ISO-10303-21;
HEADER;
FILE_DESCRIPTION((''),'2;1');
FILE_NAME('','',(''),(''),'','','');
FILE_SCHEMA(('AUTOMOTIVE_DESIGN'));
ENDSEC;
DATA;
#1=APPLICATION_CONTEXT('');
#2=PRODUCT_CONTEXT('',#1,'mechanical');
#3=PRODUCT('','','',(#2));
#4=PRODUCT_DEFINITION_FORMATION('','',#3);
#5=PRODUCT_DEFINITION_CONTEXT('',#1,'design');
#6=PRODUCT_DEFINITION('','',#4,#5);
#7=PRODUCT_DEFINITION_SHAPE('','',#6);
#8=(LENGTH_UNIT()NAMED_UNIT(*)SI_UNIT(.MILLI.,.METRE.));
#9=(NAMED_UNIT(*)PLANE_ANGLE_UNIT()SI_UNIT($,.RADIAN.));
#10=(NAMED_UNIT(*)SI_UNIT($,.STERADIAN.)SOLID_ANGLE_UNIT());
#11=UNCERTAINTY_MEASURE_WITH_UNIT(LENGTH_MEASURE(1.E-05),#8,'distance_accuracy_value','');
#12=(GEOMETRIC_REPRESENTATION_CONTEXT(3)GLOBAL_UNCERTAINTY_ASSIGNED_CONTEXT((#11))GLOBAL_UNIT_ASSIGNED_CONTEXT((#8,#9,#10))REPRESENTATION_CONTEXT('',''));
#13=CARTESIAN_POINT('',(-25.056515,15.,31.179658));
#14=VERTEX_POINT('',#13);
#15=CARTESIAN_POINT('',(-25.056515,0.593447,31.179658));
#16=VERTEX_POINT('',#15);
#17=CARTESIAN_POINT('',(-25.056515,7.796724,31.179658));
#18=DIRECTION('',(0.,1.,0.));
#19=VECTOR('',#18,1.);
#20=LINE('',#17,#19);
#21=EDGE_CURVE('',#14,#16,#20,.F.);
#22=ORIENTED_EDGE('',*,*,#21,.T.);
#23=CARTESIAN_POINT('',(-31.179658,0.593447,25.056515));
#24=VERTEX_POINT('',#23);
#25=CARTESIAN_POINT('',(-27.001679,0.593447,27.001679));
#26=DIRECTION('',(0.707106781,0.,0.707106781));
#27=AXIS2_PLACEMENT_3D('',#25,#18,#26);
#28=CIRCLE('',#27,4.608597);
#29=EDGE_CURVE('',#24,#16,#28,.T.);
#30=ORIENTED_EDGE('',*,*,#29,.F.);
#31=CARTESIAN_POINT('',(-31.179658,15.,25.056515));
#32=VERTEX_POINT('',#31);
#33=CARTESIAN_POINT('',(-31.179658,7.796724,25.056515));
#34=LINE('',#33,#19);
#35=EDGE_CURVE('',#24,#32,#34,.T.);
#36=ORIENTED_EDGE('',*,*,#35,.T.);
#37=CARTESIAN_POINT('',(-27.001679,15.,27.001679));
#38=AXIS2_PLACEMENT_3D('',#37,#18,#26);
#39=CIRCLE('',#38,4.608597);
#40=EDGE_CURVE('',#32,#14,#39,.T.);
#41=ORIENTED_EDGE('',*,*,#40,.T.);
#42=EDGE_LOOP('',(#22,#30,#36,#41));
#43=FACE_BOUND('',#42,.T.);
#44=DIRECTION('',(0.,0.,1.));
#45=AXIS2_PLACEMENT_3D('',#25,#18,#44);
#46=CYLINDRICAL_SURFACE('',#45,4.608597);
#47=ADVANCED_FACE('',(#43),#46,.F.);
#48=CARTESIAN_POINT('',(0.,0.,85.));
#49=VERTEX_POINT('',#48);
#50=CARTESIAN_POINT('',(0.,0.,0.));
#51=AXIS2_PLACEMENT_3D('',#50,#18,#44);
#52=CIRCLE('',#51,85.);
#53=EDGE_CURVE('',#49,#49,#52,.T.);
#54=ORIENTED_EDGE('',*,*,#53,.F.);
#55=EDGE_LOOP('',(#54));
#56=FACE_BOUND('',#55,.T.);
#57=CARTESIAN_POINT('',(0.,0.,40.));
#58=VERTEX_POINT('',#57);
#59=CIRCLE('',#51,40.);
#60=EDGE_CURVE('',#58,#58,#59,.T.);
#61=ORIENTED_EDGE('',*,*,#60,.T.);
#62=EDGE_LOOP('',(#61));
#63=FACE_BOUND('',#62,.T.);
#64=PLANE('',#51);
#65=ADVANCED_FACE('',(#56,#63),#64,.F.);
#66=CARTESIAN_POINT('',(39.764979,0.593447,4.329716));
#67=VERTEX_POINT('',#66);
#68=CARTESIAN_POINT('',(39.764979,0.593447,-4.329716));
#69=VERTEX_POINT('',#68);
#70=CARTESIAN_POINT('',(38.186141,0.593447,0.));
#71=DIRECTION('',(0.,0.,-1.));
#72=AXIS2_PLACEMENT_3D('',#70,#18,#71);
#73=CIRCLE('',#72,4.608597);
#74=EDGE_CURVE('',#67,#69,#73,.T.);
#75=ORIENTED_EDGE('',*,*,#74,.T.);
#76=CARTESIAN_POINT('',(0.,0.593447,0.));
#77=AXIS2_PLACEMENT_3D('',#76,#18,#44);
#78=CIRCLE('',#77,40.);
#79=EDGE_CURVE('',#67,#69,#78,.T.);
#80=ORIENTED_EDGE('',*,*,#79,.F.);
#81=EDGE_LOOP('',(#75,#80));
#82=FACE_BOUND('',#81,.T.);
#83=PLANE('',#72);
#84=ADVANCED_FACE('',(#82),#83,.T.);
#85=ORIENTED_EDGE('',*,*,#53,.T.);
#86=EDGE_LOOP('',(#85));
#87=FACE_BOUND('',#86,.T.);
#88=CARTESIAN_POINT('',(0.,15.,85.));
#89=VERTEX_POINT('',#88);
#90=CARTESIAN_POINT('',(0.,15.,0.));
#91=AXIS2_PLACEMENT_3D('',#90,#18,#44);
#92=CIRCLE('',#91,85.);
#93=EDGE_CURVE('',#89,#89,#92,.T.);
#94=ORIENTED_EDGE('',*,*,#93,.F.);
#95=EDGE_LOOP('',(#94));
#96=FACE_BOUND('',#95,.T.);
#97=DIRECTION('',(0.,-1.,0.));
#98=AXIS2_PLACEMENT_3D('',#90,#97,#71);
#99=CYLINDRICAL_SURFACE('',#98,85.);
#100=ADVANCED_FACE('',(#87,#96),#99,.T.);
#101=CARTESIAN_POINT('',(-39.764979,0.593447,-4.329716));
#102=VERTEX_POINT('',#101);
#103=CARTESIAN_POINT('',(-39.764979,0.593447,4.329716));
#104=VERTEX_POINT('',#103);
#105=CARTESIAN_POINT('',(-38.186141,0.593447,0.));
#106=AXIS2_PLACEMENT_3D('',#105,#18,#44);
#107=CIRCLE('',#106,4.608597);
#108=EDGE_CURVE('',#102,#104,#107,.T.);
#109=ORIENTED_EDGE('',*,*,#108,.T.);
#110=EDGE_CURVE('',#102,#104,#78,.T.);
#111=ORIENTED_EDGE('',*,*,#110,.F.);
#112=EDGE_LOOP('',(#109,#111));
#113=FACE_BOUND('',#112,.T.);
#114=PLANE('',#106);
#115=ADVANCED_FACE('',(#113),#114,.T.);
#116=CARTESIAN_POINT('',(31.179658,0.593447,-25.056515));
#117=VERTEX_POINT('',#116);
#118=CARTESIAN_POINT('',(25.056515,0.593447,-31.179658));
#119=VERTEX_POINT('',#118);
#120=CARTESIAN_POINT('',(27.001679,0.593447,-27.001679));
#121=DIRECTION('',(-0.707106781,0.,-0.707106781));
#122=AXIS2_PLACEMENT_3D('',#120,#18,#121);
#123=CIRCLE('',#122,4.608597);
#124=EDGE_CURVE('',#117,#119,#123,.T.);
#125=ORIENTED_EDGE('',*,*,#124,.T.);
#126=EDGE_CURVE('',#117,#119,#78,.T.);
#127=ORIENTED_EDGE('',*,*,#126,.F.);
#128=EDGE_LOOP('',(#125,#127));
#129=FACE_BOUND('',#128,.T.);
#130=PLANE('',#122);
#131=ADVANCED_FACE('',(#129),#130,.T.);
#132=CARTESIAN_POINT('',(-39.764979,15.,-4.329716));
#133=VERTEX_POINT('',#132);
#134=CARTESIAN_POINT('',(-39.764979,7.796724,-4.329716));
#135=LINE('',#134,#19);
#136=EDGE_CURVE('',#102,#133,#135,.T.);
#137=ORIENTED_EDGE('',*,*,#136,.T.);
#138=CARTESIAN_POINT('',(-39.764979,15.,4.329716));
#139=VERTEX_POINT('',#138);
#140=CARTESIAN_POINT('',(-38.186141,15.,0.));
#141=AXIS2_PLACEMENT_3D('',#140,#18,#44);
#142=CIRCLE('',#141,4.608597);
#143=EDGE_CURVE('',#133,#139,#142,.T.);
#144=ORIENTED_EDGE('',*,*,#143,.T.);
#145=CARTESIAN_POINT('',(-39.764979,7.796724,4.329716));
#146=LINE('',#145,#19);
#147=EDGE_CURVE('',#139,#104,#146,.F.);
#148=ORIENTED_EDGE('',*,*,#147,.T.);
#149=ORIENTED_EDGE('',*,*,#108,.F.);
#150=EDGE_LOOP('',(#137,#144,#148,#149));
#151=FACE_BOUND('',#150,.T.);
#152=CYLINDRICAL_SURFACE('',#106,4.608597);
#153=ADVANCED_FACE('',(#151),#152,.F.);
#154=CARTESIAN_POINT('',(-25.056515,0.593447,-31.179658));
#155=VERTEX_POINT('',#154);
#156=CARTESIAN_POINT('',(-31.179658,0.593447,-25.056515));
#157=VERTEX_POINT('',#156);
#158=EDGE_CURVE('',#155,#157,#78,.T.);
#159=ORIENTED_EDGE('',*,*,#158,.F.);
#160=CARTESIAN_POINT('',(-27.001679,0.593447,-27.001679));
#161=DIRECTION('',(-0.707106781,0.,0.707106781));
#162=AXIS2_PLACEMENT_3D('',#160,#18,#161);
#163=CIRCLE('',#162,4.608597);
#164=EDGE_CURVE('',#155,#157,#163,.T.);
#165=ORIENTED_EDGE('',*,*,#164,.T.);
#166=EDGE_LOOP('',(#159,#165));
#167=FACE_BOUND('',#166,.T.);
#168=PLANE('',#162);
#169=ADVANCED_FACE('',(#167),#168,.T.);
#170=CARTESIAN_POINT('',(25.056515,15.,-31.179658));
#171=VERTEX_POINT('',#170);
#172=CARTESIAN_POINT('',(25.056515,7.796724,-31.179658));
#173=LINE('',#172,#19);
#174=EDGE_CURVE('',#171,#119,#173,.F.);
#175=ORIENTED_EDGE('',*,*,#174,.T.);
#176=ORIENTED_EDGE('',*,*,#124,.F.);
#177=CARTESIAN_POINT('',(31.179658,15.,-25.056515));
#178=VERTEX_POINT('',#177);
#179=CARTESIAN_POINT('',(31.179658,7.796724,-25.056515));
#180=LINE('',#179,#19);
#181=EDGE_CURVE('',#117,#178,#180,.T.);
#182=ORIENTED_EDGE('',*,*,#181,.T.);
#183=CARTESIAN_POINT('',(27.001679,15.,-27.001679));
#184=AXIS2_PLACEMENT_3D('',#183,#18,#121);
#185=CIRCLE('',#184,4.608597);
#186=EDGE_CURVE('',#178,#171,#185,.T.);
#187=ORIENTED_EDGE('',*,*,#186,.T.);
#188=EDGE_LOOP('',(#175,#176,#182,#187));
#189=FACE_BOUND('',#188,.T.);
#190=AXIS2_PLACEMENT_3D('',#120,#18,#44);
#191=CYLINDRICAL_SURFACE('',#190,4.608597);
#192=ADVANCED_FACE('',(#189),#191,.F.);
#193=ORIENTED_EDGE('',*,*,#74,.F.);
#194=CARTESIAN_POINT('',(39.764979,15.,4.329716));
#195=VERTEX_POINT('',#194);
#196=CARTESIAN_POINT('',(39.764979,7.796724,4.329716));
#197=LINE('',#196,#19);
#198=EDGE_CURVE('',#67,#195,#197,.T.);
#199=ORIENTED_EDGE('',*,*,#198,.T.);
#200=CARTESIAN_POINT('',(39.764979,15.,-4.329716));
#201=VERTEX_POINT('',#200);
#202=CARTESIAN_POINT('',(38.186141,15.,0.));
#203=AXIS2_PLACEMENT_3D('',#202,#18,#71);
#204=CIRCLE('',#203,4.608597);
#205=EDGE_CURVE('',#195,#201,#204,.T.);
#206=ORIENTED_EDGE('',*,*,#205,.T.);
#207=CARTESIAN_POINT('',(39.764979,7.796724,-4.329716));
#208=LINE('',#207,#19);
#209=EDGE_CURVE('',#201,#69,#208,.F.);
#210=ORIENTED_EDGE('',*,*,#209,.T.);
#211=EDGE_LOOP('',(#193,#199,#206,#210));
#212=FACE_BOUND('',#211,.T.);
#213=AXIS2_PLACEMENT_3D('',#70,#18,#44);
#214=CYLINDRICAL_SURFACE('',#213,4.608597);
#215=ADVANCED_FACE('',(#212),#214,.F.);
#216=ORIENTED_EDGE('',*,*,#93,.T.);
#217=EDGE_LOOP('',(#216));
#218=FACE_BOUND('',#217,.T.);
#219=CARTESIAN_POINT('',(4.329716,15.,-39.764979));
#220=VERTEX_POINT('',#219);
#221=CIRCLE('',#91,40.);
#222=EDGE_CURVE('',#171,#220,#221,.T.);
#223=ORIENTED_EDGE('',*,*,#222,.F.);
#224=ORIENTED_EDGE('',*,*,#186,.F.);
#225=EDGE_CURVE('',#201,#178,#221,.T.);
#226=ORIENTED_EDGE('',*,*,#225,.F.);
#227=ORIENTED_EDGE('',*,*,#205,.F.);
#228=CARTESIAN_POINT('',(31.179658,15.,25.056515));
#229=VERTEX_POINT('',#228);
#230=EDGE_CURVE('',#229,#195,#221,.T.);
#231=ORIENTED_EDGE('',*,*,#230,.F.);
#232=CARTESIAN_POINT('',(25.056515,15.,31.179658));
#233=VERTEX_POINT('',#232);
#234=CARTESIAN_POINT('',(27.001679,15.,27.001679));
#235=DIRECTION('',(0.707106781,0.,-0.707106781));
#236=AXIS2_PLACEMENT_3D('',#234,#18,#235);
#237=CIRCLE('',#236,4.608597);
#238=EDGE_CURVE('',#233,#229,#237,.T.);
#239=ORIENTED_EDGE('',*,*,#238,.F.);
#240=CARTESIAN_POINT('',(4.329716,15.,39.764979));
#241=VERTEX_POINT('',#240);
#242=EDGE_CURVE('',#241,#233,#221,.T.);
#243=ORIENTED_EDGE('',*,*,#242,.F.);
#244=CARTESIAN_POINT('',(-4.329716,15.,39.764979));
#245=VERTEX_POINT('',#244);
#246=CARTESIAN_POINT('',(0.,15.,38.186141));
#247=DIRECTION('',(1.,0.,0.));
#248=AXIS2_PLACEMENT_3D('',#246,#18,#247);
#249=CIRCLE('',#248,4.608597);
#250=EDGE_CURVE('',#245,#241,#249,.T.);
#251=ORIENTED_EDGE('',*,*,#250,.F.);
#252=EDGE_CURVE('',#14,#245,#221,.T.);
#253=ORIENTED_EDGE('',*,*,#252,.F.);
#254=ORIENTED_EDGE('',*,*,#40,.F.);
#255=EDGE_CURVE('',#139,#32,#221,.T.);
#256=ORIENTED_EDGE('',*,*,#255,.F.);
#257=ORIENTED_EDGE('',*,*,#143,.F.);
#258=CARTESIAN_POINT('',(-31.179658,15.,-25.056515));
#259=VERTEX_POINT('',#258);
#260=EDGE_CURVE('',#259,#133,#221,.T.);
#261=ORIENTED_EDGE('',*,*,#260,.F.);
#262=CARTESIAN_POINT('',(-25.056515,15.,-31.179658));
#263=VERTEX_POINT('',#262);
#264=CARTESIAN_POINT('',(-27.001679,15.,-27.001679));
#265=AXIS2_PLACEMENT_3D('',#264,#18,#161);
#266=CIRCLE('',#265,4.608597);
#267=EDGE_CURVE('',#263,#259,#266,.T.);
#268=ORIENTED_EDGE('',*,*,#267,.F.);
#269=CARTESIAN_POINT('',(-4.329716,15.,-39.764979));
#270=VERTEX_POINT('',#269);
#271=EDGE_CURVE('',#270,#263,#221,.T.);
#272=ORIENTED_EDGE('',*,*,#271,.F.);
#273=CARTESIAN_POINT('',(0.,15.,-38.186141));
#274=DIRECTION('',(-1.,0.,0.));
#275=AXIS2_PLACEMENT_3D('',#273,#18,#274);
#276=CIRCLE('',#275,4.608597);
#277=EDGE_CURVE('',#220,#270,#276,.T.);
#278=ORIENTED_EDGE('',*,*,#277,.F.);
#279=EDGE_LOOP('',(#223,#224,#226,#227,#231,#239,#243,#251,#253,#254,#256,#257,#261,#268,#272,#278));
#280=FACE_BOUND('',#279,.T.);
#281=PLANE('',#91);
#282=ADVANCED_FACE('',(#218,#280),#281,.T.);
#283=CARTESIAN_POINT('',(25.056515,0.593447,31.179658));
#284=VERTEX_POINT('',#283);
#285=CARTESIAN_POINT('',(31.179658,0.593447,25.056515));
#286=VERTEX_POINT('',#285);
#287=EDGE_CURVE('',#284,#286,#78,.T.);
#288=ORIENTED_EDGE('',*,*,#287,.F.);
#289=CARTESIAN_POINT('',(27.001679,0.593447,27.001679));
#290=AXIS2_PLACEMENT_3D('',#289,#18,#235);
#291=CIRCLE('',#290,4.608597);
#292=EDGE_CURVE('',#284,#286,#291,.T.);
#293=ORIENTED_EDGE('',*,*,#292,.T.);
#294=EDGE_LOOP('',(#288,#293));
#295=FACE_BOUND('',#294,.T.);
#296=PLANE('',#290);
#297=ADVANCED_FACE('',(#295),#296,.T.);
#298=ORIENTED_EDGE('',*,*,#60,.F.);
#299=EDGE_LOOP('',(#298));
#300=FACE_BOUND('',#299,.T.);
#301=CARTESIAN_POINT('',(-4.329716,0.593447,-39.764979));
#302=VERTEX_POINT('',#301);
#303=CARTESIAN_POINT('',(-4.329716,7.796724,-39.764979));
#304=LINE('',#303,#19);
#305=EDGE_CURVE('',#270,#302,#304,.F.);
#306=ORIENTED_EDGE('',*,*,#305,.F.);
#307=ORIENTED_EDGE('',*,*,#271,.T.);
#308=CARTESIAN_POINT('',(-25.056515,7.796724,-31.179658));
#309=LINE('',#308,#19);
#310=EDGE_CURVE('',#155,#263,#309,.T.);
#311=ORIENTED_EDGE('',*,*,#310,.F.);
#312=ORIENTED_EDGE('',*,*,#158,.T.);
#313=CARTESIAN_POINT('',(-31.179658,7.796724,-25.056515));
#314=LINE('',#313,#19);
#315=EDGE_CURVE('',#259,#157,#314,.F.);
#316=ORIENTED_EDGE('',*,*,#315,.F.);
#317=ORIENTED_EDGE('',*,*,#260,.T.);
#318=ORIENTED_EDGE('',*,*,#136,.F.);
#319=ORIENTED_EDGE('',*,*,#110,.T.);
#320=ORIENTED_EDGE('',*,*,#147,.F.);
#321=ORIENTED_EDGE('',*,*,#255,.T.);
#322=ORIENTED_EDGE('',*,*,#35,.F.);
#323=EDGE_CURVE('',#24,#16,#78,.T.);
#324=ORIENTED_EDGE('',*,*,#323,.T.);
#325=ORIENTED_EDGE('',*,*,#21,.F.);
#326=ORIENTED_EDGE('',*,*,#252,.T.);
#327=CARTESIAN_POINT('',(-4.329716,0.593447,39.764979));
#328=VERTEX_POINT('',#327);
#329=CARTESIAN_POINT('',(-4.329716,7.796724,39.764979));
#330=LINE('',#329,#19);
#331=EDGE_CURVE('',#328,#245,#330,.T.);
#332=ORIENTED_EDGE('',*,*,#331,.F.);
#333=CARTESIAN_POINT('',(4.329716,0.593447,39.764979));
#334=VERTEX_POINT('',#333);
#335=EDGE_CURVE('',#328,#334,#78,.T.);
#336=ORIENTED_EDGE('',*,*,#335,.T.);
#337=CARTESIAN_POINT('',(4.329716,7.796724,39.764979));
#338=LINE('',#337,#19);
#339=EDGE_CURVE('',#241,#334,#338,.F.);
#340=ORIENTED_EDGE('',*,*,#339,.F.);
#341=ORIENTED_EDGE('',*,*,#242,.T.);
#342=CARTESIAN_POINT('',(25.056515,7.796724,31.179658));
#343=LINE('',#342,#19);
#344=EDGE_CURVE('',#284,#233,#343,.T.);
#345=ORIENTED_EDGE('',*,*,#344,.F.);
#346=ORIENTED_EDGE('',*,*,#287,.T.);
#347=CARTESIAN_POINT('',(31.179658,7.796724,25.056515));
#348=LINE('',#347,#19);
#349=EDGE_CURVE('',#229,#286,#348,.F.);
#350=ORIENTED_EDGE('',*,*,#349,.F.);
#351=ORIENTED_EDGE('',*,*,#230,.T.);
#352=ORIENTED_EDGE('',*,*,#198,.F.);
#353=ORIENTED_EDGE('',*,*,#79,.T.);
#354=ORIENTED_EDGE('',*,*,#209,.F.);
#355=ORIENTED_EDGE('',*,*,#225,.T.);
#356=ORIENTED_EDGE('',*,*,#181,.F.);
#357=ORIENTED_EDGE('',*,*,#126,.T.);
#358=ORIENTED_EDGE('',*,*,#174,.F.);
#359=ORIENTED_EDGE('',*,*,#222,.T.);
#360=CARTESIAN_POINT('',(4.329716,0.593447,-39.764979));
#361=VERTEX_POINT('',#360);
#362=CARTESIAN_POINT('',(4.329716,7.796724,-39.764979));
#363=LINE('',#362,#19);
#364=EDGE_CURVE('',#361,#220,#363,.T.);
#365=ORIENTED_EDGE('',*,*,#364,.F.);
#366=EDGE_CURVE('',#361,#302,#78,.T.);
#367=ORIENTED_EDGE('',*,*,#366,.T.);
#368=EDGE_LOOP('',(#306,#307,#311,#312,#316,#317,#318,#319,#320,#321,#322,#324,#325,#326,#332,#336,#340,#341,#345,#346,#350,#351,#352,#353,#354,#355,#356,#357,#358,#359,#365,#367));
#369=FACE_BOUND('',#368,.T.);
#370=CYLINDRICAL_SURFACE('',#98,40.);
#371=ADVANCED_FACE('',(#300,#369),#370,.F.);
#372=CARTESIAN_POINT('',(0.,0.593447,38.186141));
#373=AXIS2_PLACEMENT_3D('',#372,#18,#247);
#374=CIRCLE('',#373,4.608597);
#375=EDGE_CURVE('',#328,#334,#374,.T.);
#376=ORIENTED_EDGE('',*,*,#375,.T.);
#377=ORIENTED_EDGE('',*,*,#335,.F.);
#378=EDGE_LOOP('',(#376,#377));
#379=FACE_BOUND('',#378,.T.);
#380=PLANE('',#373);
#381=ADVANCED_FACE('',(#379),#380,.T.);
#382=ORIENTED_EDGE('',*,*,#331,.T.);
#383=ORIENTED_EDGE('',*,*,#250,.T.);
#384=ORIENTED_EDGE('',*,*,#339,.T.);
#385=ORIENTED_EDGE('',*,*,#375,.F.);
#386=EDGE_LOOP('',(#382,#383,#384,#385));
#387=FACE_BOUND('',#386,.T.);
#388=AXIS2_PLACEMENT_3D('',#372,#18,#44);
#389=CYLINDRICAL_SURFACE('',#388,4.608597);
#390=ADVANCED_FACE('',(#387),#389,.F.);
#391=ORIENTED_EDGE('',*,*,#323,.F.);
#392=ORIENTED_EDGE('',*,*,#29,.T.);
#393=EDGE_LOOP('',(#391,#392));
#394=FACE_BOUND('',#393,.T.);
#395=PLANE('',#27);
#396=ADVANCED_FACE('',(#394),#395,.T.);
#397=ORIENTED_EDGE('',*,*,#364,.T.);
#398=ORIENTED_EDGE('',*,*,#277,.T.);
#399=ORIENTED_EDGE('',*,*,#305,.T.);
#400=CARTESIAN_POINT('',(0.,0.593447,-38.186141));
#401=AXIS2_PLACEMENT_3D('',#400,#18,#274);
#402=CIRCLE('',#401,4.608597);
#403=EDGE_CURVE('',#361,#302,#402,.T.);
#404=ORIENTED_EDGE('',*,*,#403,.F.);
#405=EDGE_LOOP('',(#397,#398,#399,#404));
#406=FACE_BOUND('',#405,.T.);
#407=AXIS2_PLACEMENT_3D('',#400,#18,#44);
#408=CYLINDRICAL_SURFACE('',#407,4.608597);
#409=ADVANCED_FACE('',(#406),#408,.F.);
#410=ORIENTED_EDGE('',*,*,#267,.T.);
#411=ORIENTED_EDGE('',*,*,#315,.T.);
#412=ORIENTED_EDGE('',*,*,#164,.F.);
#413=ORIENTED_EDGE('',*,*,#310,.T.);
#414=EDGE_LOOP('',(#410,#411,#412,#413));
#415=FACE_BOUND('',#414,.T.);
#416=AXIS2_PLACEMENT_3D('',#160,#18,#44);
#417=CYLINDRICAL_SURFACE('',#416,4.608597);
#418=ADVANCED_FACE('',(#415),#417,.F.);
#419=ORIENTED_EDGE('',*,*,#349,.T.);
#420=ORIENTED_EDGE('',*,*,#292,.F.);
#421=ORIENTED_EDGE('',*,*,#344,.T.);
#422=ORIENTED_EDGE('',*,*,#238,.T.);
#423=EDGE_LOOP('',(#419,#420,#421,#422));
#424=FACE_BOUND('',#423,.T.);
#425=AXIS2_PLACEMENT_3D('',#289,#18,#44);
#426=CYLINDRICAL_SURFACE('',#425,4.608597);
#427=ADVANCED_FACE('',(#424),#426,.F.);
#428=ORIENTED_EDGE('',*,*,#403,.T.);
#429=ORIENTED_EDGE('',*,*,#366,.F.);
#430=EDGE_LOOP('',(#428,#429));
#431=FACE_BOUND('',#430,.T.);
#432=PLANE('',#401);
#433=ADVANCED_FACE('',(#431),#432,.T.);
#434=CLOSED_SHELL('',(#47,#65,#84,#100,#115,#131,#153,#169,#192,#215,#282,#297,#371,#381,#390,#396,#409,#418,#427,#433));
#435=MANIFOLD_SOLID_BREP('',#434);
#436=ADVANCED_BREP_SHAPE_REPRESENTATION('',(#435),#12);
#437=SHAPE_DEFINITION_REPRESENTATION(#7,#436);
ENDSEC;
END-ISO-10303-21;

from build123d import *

# Parameters (mm, degrees)
SKETCH1_R           = 85
BOSS_EXTRUDE1_DEPTH = 15
SKETCH2_R           = 40
CUT_EXTRUDE1_DEPTH  = 122.140414396
SKETCH3_R           = 4.608597006
CUT_EXTRUDE2_DEPTH  = 14.406552789
CIRPATTERN1_COUNT   = 8


with BuildPart() as part:
    # Sketch1 → Boss-Extrude1 (new body)
    with BuildSketch(Plane(origin=(0, 0, 0), x_dir=(1, 0, 0), z_dir=(0, 1, 0))):
        Circle(SKETCH1_R)
    extrude(amount=BOSS_EXTRUDE1_DEPTH)

    # Sketch2 → Cut-Extrude1 (cut, through all)
    with BuildSketch(Plane(origin=(0, 0, 0), x_dir=(1, 0, 0), z_dir=(0, 1, 0))):
        Circle(SKETCH2_R)
    extrude(amount=CUT_EXTRUDE1_DEPTH, mode=Mode.SUBTRACT)

    # Sketch3 → Cut-Extrude2 (cut)
    with BuildSketch(Plane(origin=(0, 15, 0), x_dir=(1, 0, 0), z_dir=(0, 1, 0))):
        with Locations((-38.186141272, 0)):
            Circle(SKETCH3_R)
    cut_extrude2 = extrude(amount=-CUT_EXTRUDE2_DEPTH, mode=Mode.SUBTRACT)

    # CirPattern1: Cut-Extrude2 ×8 about axis
    cirpattern1_axis = Axis((0, 0, 0), (0, 1, 0))
    for i in range(1, CIRPATTERN1_COUNT):
        add(cut_extrude2.rotate(cirpattern1_axis, i * 360 / CIRPATTERN1_COUNT), mode=Mode.SUBTRACT)


solid = part.part
